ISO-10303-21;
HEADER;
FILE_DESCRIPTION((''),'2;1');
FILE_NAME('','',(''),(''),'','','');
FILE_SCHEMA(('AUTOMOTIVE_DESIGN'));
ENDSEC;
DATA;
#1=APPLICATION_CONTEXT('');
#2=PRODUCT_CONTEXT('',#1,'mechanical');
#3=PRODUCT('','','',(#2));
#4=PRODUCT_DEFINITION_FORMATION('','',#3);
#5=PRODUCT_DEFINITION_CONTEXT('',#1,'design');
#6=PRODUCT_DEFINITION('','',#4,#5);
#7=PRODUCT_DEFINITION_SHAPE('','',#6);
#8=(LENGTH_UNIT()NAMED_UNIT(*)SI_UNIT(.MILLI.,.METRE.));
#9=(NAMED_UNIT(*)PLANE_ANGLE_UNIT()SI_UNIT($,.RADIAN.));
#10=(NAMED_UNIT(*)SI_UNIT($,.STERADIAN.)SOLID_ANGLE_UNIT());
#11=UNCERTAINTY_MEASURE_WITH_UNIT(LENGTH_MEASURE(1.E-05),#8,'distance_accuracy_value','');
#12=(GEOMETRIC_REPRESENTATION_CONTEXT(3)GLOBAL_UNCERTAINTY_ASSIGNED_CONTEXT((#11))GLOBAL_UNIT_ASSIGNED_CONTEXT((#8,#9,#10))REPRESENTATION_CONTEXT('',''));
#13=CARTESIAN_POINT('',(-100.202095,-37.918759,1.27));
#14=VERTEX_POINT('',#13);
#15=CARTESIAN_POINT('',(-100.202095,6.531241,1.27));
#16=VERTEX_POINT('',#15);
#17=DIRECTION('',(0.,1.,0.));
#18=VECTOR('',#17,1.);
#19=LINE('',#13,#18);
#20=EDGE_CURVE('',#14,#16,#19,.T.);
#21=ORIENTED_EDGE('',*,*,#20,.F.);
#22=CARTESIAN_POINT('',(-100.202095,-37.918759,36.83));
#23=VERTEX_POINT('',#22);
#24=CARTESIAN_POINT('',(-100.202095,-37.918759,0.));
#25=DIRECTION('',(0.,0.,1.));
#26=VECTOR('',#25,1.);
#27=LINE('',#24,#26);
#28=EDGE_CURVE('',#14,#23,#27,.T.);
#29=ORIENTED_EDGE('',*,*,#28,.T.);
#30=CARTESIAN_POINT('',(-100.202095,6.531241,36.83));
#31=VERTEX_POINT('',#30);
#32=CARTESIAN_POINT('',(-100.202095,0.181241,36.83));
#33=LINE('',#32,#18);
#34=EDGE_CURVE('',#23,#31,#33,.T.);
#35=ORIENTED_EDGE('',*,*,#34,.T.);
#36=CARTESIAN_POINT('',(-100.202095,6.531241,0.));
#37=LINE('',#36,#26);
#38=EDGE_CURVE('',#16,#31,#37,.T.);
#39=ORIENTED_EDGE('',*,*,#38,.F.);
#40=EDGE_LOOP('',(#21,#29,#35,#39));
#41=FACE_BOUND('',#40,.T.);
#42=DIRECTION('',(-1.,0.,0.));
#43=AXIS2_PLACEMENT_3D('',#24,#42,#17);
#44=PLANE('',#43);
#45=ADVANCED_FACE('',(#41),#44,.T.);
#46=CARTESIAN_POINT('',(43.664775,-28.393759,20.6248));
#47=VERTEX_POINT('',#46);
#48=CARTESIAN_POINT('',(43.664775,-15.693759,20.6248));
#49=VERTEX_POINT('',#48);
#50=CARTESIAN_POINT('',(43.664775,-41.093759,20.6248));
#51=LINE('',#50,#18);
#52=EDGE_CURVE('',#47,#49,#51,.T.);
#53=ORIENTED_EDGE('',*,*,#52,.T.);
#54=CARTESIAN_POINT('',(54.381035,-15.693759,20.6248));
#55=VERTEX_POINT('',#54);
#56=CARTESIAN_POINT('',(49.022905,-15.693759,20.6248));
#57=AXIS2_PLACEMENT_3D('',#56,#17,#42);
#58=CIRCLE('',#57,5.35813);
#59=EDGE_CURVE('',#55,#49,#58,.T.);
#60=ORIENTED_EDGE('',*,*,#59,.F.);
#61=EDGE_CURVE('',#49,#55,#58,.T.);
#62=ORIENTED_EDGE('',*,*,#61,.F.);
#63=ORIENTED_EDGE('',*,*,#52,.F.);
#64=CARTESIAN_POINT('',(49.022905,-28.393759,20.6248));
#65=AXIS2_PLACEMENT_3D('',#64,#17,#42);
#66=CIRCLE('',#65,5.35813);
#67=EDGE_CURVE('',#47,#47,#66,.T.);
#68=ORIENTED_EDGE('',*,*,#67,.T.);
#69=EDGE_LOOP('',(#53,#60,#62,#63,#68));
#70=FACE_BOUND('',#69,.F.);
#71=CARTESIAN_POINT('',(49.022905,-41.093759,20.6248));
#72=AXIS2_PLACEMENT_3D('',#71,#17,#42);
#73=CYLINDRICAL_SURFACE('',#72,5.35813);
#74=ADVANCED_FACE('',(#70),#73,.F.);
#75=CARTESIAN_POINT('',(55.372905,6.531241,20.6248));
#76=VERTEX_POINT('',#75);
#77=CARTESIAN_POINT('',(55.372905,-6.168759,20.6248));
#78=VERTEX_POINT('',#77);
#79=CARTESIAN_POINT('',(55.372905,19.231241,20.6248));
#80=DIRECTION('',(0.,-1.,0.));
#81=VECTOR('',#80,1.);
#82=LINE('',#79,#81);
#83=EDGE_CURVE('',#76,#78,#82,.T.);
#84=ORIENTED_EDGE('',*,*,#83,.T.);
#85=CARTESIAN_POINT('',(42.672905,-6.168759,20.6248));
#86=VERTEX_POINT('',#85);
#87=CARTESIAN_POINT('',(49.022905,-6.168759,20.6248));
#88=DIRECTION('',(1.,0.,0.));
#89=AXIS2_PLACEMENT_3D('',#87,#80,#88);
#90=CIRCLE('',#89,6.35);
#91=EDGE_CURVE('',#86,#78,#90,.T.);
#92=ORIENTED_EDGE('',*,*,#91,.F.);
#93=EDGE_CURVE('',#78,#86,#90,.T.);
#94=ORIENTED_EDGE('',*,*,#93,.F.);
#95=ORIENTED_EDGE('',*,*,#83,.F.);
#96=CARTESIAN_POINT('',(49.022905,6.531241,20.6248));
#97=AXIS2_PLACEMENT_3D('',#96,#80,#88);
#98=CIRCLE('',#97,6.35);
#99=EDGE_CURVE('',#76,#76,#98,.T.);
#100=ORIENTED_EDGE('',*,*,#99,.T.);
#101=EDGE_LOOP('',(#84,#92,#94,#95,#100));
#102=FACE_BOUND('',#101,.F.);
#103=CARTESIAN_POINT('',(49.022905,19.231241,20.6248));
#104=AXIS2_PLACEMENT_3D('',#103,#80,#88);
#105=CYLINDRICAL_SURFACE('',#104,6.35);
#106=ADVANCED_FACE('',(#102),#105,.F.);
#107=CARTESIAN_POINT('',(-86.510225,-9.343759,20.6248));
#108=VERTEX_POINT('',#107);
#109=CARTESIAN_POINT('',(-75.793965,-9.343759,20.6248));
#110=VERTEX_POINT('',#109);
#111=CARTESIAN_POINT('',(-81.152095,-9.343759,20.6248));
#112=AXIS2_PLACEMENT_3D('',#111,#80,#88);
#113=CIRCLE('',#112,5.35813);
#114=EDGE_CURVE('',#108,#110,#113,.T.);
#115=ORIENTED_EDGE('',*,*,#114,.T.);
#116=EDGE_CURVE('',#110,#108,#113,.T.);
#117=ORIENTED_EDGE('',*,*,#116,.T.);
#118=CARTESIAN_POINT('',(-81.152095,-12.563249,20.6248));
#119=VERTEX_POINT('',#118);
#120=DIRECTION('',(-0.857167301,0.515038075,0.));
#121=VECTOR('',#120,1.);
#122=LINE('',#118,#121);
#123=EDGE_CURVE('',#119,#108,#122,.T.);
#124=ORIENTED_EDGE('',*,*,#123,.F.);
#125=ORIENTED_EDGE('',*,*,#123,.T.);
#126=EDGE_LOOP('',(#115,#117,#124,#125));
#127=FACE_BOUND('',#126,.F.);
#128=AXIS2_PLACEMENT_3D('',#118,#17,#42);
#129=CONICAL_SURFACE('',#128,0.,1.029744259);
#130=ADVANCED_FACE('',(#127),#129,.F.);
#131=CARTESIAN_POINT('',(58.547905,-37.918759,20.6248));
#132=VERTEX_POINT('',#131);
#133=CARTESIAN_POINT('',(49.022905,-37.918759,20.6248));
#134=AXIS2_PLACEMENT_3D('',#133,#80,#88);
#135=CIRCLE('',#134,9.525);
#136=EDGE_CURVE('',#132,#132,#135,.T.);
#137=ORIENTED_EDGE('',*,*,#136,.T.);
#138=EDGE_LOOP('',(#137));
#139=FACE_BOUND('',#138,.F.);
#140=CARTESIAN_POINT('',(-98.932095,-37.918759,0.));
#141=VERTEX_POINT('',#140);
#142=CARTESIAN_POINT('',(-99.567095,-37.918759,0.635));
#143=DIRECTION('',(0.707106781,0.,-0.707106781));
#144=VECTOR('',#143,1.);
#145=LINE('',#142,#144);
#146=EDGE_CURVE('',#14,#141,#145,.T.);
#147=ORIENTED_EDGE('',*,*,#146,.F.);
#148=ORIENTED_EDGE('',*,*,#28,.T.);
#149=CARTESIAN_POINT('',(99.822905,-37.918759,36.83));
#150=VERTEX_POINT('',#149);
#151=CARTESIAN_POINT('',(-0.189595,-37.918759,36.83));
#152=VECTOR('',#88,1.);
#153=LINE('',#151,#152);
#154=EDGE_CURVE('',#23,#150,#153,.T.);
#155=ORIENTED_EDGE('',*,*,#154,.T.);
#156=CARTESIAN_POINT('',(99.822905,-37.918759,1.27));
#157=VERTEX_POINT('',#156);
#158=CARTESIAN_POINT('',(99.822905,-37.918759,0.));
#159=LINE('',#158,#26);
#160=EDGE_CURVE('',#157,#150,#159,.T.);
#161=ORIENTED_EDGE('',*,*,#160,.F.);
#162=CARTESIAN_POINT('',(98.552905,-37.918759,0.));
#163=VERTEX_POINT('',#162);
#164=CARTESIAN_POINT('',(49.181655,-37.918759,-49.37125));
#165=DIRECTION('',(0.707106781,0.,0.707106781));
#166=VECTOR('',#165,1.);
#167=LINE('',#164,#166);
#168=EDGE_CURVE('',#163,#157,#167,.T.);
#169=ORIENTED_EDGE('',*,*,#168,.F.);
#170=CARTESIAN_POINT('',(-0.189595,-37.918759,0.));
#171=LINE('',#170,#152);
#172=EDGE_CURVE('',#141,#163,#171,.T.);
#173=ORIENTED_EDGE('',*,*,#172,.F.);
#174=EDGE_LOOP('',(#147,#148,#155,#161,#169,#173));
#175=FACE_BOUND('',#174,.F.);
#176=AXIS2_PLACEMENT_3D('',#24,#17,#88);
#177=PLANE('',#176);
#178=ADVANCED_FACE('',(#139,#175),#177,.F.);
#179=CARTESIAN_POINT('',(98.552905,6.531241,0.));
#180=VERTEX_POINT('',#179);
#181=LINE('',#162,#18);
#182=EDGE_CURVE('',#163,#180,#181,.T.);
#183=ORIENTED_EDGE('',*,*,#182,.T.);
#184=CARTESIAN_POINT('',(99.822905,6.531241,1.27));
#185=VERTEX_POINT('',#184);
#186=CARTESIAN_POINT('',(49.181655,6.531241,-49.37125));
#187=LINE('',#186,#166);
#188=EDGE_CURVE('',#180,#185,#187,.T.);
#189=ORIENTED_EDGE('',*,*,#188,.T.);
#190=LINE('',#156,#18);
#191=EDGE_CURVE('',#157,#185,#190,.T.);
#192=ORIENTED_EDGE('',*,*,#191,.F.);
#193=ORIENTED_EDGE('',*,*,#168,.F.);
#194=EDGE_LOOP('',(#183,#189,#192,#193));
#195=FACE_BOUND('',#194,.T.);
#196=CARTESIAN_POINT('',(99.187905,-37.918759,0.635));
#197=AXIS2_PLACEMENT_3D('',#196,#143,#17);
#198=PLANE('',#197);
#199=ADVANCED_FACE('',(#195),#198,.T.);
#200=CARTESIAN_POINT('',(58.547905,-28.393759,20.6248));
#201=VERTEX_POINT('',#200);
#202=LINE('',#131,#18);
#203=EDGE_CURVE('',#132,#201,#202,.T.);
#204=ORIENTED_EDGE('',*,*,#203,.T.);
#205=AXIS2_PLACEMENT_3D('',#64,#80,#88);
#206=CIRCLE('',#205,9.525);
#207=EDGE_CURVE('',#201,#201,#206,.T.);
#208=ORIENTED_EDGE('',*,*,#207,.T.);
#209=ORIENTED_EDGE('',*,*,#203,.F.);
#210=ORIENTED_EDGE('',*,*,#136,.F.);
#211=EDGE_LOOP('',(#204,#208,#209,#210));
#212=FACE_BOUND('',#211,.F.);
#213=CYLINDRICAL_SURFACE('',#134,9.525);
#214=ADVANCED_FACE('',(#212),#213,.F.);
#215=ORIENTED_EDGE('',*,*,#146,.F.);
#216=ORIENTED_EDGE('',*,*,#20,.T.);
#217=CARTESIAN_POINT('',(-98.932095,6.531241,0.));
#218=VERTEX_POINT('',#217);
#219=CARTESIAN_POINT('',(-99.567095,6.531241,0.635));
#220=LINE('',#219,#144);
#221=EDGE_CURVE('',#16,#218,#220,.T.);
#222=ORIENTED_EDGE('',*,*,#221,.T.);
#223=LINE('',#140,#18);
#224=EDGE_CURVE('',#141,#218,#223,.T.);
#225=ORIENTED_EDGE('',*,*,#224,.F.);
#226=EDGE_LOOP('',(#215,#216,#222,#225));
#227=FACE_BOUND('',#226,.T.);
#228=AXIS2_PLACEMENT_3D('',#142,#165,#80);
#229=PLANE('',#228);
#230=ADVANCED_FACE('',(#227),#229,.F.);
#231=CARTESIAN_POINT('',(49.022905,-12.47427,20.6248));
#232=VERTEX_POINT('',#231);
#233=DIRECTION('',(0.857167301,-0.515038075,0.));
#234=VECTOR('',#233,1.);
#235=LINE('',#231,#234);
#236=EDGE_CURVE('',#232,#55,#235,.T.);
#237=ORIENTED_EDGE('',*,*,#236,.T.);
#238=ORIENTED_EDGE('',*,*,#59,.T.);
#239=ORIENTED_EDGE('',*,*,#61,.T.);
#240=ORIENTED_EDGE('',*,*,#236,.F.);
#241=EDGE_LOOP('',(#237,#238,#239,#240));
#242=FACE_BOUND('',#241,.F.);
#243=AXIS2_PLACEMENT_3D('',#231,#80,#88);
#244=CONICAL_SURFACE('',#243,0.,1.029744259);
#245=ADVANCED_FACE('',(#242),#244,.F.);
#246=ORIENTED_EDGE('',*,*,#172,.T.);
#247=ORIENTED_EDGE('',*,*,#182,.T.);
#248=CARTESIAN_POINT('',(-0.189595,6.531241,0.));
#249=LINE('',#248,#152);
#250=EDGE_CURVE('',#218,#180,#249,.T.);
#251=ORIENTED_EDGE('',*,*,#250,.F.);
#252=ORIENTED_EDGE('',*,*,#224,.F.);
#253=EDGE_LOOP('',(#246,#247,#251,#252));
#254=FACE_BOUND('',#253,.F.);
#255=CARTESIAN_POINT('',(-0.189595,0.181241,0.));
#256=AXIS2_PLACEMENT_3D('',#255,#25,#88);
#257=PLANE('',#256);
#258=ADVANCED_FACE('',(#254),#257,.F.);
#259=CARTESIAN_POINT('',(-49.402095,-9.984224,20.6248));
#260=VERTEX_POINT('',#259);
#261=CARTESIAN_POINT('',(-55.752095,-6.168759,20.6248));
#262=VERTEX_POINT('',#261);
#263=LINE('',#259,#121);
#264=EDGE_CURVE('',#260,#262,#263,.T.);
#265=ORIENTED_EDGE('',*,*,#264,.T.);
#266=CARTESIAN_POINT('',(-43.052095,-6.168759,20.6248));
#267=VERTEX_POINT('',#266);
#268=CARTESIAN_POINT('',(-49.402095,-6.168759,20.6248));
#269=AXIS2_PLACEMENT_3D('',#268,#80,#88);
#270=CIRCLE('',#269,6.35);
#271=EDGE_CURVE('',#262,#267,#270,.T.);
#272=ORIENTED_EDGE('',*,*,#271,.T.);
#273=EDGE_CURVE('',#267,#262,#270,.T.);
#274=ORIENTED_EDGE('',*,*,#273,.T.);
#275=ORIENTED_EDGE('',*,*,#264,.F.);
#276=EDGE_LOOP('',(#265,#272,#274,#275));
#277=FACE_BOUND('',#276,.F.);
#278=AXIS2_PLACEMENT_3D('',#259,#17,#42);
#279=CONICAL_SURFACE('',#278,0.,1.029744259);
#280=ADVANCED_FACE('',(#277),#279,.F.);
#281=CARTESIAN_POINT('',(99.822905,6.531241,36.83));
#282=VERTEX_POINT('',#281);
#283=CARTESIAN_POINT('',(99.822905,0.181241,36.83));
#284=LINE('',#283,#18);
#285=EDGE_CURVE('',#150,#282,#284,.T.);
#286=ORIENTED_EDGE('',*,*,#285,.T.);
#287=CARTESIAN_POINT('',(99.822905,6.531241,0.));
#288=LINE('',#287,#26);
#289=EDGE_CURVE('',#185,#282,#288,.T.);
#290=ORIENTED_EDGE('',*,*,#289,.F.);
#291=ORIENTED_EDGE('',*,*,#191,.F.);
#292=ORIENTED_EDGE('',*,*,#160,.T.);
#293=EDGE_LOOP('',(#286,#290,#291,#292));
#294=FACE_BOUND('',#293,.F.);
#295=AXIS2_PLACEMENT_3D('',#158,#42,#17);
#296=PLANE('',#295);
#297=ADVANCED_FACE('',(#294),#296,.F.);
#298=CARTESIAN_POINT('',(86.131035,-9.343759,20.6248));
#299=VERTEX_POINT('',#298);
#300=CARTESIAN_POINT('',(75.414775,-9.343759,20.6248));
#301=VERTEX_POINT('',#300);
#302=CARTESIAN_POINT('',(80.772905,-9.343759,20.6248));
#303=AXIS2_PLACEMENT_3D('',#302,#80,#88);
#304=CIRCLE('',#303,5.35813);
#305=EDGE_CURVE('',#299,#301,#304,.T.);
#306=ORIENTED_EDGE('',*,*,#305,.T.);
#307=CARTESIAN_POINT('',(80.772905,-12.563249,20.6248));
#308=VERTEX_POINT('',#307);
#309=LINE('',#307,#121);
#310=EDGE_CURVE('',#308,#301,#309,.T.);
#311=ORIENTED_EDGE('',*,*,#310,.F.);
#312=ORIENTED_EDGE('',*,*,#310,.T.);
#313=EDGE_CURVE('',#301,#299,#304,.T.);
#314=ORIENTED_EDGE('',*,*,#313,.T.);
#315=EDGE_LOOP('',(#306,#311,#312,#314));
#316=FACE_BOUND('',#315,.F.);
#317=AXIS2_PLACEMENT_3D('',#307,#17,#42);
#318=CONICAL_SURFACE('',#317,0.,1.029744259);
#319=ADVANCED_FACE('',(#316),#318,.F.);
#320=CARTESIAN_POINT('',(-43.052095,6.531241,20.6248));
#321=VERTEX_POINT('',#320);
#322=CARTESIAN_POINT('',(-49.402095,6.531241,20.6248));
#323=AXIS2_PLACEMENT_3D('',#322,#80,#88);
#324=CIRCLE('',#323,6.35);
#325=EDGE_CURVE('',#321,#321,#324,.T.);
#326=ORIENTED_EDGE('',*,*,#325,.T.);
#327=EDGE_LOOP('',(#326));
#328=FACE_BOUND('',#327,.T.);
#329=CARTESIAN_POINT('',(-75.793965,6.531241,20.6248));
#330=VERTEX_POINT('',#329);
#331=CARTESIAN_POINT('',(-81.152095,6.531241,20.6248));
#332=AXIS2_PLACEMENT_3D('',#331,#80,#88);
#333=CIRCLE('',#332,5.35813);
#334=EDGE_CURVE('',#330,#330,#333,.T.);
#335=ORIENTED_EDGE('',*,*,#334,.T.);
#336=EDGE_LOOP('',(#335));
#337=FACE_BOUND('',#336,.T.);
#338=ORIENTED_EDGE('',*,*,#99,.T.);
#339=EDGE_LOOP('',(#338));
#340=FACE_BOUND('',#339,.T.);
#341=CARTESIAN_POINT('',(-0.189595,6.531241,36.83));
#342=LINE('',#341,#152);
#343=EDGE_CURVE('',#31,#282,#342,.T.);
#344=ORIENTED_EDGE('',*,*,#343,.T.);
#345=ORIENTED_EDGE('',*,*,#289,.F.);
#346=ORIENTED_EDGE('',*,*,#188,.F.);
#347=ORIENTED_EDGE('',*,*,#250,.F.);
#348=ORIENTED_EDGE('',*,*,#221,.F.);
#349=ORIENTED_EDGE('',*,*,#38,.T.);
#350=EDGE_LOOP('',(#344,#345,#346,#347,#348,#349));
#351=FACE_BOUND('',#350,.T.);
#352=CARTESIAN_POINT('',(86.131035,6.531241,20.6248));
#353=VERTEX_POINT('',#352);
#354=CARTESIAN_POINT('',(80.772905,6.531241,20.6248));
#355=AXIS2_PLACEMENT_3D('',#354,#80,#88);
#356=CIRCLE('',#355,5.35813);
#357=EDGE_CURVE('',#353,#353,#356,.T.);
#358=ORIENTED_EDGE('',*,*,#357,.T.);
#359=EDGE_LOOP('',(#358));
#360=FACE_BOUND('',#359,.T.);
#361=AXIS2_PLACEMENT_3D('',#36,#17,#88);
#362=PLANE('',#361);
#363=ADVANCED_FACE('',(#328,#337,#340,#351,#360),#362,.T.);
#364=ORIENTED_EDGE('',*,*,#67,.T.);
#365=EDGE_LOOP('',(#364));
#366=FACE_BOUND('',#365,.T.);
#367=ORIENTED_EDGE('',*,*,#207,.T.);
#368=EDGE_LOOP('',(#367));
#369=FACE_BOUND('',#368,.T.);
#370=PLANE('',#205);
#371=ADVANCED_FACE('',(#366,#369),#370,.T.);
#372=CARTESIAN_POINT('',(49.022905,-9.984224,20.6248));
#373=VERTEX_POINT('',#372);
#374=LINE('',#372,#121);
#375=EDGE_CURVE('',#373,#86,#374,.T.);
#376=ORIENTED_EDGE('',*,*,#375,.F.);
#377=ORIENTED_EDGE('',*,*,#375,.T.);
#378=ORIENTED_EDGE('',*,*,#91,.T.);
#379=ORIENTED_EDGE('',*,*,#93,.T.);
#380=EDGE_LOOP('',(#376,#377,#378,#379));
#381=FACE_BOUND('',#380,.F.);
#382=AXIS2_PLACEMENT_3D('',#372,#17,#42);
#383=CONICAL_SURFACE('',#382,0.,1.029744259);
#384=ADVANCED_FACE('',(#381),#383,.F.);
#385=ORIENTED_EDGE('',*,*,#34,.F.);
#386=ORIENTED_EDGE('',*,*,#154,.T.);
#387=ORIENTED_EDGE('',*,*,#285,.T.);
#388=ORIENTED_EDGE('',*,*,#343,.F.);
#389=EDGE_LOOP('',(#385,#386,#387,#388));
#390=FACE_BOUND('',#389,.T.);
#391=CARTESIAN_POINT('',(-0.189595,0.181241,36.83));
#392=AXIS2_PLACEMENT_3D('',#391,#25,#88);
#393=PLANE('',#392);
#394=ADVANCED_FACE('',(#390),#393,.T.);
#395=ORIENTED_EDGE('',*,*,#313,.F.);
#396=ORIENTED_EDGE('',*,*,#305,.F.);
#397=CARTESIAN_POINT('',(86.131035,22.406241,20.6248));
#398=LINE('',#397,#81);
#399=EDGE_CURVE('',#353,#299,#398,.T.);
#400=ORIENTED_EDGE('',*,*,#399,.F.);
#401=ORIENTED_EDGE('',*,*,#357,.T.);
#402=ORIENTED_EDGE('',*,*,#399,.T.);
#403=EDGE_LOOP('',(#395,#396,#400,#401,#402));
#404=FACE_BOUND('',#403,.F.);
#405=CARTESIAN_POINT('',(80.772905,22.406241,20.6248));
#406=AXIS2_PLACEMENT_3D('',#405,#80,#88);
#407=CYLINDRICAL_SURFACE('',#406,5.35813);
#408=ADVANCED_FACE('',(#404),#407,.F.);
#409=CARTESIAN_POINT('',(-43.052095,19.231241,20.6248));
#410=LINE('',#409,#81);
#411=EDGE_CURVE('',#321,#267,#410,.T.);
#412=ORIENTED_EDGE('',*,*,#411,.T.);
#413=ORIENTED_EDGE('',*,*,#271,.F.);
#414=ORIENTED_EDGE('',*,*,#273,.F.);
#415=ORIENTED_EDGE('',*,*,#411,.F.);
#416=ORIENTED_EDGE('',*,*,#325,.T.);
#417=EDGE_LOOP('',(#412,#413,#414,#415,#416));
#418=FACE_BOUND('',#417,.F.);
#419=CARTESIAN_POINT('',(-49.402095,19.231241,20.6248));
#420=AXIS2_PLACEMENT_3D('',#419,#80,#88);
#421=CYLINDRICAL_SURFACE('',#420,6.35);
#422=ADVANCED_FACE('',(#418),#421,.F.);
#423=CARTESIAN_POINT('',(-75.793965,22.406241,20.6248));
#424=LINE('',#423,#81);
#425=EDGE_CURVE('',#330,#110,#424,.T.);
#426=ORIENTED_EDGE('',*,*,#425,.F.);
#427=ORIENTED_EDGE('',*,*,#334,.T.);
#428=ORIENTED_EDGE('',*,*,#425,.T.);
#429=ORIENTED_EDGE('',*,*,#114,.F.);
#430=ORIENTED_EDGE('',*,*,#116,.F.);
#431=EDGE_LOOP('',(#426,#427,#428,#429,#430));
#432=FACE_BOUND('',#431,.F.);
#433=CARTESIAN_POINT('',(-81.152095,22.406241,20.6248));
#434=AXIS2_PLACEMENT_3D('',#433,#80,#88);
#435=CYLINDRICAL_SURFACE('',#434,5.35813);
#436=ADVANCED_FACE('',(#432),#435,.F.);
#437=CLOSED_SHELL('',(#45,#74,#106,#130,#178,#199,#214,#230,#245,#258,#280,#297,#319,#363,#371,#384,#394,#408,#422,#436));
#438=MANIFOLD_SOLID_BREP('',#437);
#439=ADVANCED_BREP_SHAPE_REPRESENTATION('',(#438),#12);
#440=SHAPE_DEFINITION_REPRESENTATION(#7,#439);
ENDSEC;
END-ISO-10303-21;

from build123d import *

# Parameters (mm, degrees)
F0_W      = 200.025
F0_H      = 76.2
F1_DEPTH  = 36.83
F2_DEPTH  = 31.75
F4_D      = 10.71626
F4_DEPTH  = 15.875
F4_TIP    = 3.2194893086
F5_D      = 12.7
F5_DEPTH  = 12.7
F5_TIP    = 3.8154649308
F6_SIZE   = 1.27
F7_R      = 9.525
F8_DEPTH  = 9.525
F10_D     = 10.71626
F10_DEPTH = 12.7
F10_TIP   = 3.2194893086


# Not quite as in the source:
# - a length typed as a fraction of an inch, garbled in the dataset ("3 / 203.2 mm" for 3/8 in), is restored
# - a feature names something its author has since deleted; it is built from what else it names


with BuildPart() as f1:
    # F0 (on Top) → F1 (new body)
    with BuildSketch(Plane.XY):
        with Locations((-0.1895949244, 0.1812406208)):
            Rectangle(F0_W, F0_H)
    extrude(amount=F1_DEPTH)

    # F2 (cut): a face of the model
    f2_faces = [f1.faces().sort_by_distance(p)[0] for p in [
        (-0.1895949244, 38.2812406208, 18.415),
    ]]
    extrude(f2_faces, amount=-F2_DEPTH, mode=Mode.SUBTRACT)

    # F4
    with Locations(Plane(origin=(0, 6.5312406208, 0), x_dir=(-1, 0, 0), z_dir=(0, 1, 0))):
        with Locations((-80.7729050756, 20.6248), (81.1520949244, 20.6248)):
            Hole(F4_D / 2, depth=F4_DEPTH)
            with Locations((0, 0, -(F4_DEPTH + F4_TIP / 2))):  # 118° drill point
                Cone(0, F4_D / 2, F4_TIP, mode=Mode.SUBTRACT)

    # F5
    with Locations(Plane(origin=(0, 6.5312406208, 0), x_dir=(-1, 0, 0), z_dir=(0, 1, 0))):
        with Locations((-49.0229050756, 20.6248), (49.4020949244, 20.6248)):
            Hole(F5_D / 2, depth=F5_DEPTH)
            with Locations((0, 0, -(F5_DEPTH + F5_TIP / 2))):  # 118° drill point
                Cone(0, F5_D / 2, F5_TIP, mode=Mode.SUBTRACT)

    # F6
    f6_edges = [f1.edges().sort_by_distance(p)[0] for p in [
        (-100.202095, -15.693759, 0),
        (99.822905, -15.693759, 0),
    ]]
    chamfer(f6_edges, length=F6_SIZE)

    # F7 (on face) → F8 (cut)
    with BuildSketch(Plane.XZ.offset(37.9187593792)):
        with Locations((49.0229050756, 20.6248)):
            Circle(F7_R)
    extrude(amount=-F8_DEPTH, mode=Mode.SUBTRACT)

    # F10
    with Locations(Plane.XZ.offset(28.3937593792)):
        with Locations((49.0229050756, 20.6248)):
            Hole(F10_D / 2, depth=F10_DEPTH)
            with Locations((0, 0, -(F10_DEPTH + F10_TIP / 2))):  # 118° drill point
                Cone(0, F10_D / 2, F10_TIP, mode=Mode.SUBTRACT)


solid = f1.part
